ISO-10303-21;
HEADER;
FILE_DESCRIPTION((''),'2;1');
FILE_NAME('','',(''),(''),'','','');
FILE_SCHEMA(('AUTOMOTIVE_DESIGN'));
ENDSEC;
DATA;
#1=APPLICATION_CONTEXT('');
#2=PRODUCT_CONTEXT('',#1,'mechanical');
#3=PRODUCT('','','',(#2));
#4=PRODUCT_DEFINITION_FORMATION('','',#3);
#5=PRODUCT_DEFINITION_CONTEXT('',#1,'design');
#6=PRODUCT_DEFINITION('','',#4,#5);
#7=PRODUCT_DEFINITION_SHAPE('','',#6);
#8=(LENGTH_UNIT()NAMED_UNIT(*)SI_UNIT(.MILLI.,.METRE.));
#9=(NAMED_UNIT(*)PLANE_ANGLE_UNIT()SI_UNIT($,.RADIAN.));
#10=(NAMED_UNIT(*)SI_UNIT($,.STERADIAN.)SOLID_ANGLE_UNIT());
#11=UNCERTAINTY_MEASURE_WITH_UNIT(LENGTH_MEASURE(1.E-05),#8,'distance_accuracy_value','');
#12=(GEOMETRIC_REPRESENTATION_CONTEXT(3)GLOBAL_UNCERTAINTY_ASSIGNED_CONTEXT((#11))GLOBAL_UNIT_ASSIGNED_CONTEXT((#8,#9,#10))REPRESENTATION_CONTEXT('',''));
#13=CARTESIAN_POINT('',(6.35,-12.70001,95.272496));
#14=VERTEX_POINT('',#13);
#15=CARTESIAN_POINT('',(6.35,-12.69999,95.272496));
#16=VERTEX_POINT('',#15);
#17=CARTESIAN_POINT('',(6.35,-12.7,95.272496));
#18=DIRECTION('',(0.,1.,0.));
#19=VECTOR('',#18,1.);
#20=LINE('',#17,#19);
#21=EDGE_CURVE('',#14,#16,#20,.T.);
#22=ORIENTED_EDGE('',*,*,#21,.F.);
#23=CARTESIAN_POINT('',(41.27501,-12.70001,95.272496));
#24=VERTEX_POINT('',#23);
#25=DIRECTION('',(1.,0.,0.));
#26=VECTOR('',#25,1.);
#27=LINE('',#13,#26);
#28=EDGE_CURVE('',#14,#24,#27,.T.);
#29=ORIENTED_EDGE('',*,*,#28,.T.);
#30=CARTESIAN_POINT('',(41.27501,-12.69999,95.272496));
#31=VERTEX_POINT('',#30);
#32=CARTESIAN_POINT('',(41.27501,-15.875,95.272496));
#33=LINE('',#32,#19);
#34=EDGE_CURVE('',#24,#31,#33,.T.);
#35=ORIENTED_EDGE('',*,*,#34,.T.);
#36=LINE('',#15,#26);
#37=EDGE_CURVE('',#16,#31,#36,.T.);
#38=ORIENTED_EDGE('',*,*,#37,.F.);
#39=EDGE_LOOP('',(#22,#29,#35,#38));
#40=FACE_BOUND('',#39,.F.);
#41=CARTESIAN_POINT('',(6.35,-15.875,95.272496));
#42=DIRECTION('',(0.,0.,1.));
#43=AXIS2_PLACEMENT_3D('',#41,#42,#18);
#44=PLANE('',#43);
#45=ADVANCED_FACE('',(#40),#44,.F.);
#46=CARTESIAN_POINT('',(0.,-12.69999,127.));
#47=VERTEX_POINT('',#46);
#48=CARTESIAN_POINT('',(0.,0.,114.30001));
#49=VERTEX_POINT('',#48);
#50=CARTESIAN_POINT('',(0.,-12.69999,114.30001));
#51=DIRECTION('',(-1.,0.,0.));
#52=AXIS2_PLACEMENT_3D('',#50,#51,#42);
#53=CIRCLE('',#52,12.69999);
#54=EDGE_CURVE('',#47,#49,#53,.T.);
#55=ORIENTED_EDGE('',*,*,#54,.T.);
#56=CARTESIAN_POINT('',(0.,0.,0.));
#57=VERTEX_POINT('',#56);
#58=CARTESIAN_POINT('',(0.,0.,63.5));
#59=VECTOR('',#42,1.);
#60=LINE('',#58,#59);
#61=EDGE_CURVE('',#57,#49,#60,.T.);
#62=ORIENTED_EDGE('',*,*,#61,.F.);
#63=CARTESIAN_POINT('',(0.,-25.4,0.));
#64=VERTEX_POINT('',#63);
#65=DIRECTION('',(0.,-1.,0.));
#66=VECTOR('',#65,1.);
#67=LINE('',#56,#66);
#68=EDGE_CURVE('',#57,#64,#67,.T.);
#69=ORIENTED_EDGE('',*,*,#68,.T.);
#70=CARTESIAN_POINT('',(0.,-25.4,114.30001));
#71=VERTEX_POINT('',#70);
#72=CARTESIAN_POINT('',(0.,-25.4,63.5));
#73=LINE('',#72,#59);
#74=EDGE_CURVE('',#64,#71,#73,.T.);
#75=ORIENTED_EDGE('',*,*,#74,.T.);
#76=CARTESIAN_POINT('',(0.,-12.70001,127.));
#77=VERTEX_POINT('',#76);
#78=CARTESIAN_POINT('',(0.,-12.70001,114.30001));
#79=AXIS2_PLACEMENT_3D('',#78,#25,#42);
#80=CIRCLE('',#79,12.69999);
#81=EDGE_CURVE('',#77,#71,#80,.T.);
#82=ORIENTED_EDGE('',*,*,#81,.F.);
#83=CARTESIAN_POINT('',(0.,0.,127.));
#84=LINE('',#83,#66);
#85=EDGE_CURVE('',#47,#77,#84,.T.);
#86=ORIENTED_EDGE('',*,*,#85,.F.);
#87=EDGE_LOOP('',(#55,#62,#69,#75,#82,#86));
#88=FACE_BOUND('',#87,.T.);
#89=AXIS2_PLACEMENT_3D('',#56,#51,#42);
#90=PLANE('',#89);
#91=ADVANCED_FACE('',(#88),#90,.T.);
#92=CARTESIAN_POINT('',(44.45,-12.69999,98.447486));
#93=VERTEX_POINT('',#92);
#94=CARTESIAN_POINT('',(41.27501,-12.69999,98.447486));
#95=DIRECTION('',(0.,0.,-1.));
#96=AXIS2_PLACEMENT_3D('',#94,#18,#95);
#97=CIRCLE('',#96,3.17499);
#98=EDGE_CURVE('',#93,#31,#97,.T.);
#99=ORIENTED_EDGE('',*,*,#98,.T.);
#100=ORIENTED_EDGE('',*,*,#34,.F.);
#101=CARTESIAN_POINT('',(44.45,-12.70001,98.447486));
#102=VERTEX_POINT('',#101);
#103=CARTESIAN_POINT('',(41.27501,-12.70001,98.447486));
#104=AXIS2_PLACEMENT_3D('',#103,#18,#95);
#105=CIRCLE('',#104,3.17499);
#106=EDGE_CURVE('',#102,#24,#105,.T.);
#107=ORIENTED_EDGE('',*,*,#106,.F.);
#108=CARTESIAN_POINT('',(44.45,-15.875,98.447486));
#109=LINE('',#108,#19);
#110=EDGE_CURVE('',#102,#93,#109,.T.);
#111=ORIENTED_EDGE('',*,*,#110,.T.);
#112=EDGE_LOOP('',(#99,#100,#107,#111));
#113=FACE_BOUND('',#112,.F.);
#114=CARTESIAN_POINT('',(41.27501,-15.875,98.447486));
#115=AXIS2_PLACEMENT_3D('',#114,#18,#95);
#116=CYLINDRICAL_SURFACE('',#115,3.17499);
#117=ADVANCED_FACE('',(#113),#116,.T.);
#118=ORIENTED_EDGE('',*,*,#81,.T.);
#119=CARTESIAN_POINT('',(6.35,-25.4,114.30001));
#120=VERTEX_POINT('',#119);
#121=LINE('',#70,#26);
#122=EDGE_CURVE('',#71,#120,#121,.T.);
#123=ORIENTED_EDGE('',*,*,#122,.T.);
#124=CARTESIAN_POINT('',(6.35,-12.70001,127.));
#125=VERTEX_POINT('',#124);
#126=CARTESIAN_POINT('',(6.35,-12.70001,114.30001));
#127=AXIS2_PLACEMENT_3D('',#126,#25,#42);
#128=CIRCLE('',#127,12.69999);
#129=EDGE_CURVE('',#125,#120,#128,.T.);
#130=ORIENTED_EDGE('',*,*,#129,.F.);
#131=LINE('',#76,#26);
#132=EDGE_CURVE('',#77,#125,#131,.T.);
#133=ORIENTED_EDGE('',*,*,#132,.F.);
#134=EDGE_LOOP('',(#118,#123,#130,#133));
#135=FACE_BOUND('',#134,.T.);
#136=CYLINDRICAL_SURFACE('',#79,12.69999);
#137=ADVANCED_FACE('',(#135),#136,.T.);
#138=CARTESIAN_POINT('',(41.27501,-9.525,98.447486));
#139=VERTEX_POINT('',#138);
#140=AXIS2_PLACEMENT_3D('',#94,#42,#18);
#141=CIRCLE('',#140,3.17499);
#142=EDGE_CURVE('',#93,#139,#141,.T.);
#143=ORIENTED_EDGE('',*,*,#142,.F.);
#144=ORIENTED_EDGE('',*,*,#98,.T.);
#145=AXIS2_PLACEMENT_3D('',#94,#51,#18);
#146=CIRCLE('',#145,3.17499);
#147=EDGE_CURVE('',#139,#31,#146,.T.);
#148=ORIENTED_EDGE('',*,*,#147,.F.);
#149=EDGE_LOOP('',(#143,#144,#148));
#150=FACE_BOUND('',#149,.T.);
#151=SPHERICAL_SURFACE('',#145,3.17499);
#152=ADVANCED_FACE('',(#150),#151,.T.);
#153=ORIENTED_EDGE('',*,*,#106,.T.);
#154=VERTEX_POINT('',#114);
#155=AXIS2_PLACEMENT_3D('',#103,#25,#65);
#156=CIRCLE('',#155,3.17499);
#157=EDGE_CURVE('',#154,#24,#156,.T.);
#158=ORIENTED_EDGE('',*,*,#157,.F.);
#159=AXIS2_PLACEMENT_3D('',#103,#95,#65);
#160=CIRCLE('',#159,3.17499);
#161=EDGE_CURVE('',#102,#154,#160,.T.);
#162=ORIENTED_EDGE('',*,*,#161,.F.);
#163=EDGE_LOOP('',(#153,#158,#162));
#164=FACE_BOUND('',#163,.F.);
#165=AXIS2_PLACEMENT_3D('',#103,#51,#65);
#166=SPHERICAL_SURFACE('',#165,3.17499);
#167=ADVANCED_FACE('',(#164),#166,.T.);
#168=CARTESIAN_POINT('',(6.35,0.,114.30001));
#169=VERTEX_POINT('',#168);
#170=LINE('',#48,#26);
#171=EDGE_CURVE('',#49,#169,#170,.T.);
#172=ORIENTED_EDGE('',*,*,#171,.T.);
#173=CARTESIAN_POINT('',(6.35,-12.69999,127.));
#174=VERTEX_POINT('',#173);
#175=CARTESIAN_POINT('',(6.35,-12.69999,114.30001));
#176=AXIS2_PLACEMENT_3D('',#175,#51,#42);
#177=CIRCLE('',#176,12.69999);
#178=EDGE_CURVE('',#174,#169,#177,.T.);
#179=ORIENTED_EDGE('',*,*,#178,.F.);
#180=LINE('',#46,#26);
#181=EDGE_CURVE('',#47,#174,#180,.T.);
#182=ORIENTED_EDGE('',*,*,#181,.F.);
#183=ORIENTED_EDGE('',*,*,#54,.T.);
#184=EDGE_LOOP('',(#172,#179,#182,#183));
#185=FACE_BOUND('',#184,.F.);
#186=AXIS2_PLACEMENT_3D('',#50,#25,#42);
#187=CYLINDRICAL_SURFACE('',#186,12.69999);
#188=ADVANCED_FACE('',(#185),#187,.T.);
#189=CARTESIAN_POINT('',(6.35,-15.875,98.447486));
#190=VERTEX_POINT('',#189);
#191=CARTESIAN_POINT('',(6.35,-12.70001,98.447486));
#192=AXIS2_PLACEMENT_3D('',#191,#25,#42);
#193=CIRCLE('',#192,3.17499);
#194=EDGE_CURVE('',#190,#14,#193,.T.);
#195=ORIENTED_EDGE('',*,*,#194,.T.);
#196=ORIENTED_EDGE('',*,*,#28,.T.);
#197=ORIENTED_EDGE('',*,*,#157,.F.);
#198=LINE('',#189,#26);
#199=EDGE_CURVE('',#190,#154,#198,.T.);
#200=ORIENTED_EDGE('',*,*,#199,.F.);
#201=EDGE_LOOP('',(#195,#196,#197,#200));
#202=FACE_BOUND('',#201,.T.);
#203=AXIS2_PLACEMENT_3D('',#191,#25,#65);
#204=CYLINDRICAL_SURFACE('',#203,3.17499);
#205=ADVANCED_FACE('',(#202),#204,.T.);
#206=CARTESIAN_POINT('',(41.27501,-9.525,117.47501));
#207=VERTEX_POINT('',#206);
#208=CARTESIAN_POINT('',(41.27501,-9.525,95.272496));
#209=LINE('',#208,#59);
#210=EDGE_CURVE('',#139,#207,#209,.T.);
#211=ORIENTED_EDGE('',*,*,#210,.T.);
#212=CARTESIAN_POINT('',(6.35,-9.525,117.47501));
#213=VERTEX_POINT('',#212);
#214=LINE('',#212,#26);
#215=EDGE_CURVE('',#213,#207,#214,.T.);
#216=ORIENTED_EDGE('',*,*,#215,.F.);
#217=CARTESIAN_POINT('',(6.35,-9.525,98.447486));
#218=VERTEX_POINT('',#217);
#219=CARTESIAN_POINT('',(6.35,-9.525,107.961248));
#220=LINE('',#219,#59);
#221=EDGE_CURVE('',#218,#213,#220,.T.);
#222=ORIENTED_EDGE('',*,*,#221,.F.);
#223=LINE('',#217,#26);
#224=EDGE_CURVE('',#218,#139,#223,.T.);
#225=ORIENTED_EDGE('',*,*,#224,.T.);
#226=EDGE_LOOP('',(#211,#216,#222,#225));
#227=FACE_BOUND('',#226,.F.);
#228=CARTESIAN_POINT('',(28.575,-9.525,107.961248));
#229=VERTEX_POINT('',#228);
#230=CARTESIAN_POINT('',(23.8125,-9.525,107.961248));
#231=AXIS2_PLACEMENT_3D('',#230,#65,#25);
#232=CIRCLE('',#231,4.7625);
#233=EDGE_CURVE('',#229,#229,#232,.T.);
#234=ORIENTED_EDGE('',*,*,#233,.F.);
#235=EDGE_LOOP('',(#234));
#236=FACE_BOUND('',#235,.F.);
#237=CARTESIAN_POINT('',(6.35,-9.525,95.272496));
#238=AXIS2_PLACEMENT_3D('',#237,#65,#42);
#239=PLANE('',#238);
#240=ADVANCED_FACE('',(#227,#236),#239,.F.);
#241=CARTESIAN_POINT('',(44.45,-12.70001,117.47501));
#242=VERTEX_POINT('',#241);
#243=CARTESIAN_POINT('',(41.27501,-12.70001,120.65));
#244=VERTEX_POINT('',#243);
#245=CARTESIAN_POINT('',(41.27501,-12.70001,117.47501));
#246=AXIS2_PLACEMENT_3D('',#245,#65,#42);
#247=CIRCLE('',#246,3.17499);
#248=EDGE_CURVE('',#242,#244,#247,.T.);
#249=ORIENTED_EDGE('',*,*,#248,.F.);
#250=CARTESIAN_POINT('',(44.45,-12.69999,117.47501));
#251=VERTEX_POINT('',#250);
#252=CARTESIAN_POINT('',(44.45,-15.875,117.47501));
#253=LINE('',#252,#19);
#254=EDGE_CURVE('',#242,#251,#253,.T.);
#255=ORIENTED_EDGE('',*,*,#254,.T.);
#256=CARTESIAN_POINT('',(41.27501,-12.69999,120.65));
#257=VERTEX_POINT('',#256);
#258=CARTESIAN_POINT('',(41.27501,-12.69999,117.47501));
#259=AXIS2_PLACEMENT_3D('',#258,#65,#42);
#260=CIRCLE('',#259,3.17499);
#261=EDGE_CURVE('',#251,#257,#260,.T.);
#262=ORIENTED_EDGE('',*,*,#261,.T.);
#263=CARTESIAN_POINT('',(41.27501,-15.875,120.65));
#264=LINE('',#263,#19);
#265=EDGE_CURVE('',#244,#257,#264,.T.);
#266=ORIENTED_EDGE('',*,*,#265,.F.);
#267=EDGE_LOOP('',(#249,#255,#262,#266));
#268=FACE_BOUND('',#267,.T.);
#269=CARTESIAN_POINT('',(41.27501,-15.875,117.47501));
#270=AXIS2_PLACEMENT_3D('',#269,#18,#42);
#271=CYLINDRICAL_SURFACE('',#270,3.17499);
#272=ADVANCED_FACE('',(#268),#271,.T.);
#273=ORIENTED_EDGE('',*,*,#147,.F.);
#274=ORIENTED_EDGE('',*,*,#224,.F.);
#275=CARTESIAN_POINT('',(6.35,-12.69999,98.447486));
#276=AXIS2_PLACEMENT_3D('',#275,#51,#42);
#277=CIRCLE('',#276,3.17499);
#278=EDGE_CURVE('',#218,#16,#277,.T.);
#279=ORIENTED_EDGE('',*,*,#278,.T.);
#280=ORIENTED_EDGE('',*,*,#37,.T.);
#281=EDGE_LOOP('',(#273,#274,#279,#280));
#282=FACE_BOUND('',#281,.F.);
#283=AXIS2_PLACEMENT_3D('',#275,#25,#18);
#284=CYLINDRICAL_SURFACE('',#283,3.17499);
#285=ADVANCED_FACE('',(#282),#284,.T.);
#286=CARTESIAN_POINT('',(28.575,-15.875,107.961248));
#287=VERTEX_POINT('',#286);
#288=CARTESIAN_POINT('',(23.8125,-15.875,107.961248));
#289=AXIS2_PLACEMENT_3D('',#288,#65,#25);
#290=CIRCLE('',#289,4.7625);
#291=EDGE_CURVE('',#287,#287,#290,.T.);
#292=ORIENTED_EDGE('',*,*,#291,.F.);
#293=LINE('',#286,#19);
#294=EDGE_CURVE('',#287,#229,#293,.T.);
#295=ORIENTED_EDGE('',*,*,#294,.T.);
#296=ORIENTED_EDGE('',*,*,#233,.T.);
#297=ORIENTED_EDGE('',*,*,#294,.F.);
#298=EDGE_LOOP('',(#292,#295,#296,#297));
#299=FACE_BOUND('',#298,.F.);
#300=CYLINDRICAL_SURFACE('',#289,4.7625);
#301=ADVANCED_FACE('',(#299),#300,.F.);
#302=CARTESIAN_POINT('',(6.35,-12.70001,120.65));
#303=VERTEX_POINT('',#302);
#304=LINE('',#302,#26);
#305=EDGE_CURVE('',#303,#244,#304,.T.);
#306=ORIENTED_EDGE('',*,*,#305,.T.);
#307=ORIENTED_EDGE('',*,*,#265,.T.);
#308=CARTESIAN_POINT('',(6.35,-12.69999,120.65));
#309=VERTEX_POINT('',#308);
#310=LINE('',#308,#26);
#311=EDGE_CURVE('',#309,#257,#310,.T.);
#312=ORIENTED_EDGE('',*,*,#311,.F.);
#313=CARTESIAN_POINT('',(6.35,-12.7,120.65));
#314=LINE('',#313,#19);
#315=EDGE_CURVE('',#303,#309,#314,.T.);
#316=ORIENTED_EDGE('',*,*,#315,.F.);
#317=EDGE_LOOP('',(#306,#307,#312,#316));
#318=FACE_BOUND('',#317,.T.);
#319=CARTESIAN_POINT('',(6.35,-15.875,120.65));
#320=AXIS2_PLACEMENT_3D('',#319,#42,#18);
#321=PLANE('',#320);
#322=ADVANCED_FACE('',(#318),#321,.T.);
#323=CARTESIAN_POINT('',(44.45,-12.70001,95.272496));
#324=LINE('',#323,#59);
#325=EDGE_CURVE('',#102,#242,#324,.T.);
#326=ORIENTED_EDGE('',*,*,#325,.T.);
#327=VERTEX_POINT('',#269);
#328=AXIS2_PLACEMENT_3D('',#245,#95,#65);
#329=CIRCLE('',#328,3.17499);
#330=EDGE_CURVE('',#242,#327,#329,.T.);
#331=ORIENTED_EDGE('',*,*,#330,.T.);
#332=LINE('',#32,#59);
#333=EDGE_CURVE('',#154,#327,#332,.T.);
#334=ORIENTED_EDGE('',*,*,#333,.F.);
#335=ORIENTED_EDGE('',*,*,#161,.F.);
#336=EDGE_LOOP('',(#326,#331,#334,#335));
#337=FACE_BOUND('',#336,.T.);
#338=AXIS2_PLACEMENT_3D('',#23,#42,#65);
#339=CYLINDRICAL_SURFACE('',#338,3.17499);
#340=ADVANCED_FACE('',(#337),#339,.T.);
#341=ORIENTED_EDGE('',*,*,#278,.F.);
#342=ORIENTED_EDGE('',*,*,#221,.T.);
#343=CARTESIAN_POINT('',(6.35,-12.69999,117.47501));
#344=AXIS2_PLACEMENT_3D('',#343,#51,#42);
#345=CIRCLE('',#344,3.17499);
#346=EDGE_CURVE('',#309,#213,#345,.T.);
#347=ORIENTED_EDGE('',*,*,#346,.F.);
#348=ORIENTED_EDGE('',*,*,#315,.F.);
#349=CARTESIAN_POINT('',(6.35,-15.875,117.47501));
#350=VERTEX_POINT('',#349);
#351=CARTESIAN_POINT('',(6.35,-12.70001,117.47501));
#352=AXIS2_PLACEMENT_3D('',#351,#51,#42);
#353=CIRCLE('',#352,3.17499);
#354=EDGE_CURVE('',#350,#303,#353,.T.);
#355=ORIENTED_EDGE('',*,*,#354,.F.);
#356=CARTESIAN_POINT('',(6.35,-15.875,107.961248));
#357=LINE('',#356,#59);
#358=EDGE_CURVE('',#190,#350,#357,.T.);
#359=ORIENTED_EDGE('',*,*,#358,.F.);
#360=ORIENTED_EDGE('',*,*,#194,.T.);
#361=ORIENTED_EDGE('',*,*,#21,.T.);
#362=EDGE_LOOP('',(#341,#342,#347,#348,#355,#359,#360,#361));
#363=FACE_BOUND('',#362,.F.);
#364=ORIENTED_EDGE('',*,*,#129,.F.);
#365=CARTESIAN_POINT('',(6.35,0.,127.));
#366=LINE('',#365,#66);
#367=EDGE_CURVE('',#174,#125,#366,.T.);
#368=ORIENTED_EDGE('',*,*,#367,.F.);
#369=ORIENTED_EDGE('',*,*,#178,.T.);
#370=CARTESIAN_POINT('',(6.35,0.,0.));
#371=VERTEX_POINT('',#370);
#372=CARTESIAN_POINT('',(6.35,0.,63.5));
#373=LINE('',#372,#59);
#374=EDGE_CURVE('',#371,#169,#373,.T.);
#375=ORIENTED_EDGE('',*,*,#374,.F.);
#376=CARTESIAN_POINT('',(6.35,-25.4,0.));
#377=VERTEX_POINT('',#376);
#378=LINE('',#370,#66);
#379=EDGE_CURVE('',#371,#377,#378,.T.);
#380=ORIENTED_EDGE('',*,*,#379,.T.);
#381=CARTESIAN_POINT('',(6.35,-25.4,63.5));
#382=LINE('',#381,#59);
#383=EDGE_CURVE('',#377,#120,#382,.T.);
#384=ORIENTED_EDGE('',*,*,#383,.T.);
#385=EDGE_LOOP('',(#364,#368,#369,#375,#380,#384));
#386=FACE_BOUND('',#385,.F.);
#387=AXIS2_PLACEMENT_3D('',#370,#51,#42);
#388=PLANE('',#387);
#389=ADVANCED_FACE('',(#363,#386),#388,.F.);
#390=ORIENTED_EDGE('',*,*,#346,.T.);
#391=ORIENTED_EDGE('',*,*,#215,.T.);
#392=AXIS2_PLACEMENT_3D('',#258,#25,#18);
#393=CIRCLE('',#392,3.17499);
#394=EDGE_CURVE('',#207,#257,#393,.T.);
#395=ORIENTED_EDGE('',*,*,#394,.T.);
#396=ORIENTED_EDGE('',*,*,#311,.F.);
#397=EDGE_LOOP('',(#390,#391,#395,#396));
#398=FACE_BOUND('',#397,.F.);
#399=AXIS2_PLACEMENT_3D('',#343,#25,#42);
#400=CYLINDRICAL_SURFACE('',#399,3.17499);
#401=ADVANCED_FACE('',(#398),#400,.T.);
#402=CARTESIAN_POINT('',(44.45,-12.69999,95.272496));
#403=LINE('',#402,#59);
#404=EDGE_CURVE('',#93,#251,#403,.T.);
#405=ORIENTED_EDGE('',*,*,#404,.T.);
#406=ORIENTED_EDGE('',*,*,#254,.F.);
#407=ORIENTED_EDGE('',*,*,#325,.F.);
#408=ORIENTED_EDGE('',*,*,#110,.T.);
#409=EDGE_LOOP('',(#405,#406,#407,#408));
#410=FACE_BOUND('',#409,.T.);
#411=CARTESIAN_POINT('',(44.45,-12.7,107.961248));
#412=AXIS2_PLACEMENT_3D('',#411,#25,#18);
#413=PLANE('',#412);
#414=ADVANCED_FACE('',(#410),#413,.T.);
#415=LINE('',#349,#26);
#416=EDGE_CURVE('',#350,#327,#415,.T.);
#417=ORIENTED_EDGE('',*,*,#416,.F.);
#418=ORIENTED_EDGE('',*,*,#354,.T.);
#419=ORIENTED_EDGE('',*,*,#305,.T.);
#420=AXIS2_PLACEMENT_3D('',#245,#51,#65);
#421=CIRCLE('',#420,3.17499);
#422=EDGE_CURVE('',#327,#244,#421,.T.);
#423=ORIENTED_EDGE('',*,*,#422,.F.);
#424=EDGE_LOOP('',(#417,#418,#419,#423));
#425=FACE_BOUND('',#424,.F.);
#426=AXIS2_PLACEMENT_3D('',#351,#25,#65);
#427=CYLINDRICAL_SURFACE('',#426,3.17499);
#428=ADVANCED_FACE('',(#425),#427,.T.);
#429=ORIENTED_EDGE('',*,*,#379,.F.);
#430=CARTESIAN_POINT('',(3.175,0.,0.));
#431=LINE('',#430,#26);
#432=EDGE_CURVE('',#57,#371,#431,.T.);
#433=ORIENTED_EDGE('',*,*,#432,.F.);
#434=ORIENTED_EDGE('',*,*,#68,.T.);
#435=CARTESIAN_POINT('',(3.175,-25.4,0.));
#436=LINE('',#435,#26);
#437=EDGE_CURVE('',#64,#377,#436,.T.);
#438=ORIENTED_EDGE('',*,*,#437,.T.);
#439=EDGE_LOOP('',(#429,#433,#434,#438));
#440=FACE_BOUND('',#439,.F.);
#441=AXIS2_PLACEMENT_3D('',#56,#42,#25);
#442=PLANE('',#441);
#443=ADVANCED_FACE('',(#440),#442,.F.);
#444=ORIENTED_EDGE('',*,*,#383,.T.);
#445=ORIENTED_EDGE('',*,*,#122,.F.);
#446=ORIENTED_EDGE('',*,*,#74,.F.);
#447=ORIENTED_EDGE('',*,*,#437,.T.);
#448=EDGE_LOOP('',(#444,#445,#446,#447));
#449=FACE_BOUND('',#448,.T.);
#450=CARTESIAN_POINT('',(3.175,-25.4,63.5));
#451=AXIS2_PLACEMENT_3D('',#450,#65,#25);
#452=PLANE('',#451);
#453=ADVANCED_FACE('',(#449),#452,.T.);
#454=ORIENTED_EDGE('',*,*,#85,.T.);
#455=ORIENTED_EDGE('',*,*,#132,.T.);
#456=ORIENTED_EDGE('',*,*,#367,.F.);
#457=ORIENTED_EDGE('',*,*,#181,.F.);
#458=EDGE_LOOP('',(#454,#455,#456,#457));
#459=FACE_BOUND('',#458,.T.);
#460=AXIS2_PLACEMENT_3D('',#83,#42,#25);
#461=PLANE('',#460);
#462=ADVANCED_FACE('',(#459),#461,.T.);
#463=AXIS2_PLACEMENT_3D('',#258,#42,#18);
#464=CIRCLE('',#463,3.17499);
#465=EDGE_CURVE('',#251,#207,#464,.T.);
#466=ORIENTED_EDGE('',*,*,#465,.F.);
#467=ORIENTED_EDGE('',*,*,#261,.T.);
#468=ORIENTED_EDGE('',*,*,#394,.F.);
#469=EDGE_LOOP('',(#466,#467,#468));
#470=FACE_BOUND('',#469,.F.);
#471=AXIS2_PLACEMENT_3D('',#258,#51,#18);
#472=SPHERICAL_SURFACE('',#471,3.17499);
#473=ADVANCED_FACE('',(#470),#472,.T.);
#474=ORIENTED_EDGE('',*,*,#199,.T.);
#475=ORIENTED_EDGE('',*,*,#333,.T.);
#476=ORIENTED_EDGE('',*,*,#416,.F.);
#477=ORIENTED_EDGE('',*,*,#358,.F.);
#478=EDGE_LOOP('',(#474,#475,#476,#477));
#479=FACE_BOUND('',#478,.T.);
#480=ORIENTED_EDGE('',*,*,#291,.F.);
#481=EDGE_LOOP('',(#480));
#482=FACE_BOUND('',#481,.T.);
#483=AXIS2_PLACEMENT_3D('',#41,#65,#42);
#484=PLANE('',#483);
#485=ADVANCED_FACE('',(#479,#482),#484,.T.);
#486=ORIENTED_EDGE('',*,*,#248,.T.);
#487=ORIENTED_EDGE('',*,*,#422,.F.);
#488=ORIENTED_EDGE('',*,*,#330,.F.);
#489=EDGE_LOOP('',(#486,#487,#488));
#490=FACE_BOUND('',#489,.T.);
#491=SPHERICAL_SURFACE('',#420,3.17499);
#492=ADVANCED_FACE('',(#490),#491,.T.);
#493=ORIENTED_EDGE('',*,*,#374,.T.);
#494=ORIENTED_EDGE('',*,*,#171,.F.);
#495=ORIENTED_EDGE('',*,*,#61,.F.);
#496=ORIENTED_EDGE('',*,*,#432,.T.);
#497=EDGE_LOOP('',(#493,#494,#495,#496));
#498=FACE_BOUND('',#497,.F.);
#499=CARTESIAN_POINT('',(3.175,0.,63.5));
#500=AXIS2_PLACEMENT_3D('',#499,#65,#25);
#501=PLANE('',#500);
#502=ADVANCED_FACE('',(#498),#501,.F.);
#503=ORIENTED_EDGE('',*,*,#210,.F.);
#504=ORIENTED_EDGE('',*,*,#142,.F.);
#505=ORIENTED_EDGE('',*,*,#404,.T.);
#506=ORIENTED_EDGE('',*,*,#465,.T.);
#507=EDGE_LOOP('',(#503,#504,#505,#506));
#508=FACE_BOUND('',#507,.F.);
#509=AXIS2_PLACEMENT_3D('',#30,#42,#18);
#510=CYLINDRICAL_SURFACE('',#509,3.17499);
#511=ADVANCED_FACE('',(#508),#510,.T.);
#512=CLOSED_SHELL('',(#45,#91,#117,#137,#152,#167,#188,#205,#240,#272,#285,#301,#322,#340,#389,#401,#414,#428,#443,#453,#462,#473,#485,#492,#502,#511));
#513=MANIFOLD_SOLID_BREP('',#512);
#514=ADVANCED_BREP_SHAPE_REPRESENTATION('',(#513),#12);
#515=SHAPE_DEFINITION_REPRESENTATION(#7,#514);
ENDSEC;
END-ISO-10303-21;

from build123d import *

# Parameters (mm, degrees)
F0_W     = 6.35
F0_H     = 127
F1_DEPTH = 25.4
F2_R     = 12.69999
F3_W     = 6.35
F3_H     = 25.3775035135
F4_DEPTH = 38.1
F5_R     = 3.17499
F6_R     = 4.7625
F7_DEPTH = 25.4


# Not quite as in the source:
# - a fillet or chamfer is up to 0.001 mm smaller than in the source, because OpenCascade refuses the exact size


with BuildPart() as f1:
    # F0 (on Front) → F1 (new body)
    with BuildSketch(Plane.XZ):
        with Locations((3.175, 63.5)):
            Rectangle(F0_W, F0_H)
    extrude(amount=F1_DEPTH)

    # F2 (radius 12.7 in the source; OpenCascade refuses exactly that, so slightly less here)
    f2_edges = [f1.edges().sort_by_distance(p)[0] for p in [
        (3.175, -25.4, 127),
        (3.175, 0, 127),
    ]]
    fillet(f2_edges, radius=F2_R)

    # F3 (on face) → F4 (join)
    with BuildSketch(Plane.YZ.offset(6.35)):
        with Locations((-12.7, 107.9612482432)):
            Rectangle(F3_W, F3_H)
    extrude(amount=F4_DEPTH)

    # F5 (radius 3.175 in the source; OpenCascade refuses exactly that, so slightly less here)
    f5_edges = [f1.edges().sort_by_distance(p)[0] for p in [
        (25.4, -15.875, 120.65),
        (25.4, -9.525, 120.65),
        (25.4, -15.875, 95.272496),
        (25.4, -9.525, 95.272496),
        (44.45, -15.875, 107.961248),
        (44.45, -9.525, 107.961248),
        (44.45, -12.7, 95.272496),
        (44.45, -12.7, 120.65),
    ]]
    fillet(f5_edges, radius=F5_R)

    # F6 (on face) → F7 (cut)
    with BuildSketch(Plane.XZ.offset(15.875)):
        with Locations((23.8125, 107.9612482432)):
            Circle(F6_R)
    extrude(amount=-F7_DEPTH, mode=Mode.SUBTRACT)


solid = f1.part
